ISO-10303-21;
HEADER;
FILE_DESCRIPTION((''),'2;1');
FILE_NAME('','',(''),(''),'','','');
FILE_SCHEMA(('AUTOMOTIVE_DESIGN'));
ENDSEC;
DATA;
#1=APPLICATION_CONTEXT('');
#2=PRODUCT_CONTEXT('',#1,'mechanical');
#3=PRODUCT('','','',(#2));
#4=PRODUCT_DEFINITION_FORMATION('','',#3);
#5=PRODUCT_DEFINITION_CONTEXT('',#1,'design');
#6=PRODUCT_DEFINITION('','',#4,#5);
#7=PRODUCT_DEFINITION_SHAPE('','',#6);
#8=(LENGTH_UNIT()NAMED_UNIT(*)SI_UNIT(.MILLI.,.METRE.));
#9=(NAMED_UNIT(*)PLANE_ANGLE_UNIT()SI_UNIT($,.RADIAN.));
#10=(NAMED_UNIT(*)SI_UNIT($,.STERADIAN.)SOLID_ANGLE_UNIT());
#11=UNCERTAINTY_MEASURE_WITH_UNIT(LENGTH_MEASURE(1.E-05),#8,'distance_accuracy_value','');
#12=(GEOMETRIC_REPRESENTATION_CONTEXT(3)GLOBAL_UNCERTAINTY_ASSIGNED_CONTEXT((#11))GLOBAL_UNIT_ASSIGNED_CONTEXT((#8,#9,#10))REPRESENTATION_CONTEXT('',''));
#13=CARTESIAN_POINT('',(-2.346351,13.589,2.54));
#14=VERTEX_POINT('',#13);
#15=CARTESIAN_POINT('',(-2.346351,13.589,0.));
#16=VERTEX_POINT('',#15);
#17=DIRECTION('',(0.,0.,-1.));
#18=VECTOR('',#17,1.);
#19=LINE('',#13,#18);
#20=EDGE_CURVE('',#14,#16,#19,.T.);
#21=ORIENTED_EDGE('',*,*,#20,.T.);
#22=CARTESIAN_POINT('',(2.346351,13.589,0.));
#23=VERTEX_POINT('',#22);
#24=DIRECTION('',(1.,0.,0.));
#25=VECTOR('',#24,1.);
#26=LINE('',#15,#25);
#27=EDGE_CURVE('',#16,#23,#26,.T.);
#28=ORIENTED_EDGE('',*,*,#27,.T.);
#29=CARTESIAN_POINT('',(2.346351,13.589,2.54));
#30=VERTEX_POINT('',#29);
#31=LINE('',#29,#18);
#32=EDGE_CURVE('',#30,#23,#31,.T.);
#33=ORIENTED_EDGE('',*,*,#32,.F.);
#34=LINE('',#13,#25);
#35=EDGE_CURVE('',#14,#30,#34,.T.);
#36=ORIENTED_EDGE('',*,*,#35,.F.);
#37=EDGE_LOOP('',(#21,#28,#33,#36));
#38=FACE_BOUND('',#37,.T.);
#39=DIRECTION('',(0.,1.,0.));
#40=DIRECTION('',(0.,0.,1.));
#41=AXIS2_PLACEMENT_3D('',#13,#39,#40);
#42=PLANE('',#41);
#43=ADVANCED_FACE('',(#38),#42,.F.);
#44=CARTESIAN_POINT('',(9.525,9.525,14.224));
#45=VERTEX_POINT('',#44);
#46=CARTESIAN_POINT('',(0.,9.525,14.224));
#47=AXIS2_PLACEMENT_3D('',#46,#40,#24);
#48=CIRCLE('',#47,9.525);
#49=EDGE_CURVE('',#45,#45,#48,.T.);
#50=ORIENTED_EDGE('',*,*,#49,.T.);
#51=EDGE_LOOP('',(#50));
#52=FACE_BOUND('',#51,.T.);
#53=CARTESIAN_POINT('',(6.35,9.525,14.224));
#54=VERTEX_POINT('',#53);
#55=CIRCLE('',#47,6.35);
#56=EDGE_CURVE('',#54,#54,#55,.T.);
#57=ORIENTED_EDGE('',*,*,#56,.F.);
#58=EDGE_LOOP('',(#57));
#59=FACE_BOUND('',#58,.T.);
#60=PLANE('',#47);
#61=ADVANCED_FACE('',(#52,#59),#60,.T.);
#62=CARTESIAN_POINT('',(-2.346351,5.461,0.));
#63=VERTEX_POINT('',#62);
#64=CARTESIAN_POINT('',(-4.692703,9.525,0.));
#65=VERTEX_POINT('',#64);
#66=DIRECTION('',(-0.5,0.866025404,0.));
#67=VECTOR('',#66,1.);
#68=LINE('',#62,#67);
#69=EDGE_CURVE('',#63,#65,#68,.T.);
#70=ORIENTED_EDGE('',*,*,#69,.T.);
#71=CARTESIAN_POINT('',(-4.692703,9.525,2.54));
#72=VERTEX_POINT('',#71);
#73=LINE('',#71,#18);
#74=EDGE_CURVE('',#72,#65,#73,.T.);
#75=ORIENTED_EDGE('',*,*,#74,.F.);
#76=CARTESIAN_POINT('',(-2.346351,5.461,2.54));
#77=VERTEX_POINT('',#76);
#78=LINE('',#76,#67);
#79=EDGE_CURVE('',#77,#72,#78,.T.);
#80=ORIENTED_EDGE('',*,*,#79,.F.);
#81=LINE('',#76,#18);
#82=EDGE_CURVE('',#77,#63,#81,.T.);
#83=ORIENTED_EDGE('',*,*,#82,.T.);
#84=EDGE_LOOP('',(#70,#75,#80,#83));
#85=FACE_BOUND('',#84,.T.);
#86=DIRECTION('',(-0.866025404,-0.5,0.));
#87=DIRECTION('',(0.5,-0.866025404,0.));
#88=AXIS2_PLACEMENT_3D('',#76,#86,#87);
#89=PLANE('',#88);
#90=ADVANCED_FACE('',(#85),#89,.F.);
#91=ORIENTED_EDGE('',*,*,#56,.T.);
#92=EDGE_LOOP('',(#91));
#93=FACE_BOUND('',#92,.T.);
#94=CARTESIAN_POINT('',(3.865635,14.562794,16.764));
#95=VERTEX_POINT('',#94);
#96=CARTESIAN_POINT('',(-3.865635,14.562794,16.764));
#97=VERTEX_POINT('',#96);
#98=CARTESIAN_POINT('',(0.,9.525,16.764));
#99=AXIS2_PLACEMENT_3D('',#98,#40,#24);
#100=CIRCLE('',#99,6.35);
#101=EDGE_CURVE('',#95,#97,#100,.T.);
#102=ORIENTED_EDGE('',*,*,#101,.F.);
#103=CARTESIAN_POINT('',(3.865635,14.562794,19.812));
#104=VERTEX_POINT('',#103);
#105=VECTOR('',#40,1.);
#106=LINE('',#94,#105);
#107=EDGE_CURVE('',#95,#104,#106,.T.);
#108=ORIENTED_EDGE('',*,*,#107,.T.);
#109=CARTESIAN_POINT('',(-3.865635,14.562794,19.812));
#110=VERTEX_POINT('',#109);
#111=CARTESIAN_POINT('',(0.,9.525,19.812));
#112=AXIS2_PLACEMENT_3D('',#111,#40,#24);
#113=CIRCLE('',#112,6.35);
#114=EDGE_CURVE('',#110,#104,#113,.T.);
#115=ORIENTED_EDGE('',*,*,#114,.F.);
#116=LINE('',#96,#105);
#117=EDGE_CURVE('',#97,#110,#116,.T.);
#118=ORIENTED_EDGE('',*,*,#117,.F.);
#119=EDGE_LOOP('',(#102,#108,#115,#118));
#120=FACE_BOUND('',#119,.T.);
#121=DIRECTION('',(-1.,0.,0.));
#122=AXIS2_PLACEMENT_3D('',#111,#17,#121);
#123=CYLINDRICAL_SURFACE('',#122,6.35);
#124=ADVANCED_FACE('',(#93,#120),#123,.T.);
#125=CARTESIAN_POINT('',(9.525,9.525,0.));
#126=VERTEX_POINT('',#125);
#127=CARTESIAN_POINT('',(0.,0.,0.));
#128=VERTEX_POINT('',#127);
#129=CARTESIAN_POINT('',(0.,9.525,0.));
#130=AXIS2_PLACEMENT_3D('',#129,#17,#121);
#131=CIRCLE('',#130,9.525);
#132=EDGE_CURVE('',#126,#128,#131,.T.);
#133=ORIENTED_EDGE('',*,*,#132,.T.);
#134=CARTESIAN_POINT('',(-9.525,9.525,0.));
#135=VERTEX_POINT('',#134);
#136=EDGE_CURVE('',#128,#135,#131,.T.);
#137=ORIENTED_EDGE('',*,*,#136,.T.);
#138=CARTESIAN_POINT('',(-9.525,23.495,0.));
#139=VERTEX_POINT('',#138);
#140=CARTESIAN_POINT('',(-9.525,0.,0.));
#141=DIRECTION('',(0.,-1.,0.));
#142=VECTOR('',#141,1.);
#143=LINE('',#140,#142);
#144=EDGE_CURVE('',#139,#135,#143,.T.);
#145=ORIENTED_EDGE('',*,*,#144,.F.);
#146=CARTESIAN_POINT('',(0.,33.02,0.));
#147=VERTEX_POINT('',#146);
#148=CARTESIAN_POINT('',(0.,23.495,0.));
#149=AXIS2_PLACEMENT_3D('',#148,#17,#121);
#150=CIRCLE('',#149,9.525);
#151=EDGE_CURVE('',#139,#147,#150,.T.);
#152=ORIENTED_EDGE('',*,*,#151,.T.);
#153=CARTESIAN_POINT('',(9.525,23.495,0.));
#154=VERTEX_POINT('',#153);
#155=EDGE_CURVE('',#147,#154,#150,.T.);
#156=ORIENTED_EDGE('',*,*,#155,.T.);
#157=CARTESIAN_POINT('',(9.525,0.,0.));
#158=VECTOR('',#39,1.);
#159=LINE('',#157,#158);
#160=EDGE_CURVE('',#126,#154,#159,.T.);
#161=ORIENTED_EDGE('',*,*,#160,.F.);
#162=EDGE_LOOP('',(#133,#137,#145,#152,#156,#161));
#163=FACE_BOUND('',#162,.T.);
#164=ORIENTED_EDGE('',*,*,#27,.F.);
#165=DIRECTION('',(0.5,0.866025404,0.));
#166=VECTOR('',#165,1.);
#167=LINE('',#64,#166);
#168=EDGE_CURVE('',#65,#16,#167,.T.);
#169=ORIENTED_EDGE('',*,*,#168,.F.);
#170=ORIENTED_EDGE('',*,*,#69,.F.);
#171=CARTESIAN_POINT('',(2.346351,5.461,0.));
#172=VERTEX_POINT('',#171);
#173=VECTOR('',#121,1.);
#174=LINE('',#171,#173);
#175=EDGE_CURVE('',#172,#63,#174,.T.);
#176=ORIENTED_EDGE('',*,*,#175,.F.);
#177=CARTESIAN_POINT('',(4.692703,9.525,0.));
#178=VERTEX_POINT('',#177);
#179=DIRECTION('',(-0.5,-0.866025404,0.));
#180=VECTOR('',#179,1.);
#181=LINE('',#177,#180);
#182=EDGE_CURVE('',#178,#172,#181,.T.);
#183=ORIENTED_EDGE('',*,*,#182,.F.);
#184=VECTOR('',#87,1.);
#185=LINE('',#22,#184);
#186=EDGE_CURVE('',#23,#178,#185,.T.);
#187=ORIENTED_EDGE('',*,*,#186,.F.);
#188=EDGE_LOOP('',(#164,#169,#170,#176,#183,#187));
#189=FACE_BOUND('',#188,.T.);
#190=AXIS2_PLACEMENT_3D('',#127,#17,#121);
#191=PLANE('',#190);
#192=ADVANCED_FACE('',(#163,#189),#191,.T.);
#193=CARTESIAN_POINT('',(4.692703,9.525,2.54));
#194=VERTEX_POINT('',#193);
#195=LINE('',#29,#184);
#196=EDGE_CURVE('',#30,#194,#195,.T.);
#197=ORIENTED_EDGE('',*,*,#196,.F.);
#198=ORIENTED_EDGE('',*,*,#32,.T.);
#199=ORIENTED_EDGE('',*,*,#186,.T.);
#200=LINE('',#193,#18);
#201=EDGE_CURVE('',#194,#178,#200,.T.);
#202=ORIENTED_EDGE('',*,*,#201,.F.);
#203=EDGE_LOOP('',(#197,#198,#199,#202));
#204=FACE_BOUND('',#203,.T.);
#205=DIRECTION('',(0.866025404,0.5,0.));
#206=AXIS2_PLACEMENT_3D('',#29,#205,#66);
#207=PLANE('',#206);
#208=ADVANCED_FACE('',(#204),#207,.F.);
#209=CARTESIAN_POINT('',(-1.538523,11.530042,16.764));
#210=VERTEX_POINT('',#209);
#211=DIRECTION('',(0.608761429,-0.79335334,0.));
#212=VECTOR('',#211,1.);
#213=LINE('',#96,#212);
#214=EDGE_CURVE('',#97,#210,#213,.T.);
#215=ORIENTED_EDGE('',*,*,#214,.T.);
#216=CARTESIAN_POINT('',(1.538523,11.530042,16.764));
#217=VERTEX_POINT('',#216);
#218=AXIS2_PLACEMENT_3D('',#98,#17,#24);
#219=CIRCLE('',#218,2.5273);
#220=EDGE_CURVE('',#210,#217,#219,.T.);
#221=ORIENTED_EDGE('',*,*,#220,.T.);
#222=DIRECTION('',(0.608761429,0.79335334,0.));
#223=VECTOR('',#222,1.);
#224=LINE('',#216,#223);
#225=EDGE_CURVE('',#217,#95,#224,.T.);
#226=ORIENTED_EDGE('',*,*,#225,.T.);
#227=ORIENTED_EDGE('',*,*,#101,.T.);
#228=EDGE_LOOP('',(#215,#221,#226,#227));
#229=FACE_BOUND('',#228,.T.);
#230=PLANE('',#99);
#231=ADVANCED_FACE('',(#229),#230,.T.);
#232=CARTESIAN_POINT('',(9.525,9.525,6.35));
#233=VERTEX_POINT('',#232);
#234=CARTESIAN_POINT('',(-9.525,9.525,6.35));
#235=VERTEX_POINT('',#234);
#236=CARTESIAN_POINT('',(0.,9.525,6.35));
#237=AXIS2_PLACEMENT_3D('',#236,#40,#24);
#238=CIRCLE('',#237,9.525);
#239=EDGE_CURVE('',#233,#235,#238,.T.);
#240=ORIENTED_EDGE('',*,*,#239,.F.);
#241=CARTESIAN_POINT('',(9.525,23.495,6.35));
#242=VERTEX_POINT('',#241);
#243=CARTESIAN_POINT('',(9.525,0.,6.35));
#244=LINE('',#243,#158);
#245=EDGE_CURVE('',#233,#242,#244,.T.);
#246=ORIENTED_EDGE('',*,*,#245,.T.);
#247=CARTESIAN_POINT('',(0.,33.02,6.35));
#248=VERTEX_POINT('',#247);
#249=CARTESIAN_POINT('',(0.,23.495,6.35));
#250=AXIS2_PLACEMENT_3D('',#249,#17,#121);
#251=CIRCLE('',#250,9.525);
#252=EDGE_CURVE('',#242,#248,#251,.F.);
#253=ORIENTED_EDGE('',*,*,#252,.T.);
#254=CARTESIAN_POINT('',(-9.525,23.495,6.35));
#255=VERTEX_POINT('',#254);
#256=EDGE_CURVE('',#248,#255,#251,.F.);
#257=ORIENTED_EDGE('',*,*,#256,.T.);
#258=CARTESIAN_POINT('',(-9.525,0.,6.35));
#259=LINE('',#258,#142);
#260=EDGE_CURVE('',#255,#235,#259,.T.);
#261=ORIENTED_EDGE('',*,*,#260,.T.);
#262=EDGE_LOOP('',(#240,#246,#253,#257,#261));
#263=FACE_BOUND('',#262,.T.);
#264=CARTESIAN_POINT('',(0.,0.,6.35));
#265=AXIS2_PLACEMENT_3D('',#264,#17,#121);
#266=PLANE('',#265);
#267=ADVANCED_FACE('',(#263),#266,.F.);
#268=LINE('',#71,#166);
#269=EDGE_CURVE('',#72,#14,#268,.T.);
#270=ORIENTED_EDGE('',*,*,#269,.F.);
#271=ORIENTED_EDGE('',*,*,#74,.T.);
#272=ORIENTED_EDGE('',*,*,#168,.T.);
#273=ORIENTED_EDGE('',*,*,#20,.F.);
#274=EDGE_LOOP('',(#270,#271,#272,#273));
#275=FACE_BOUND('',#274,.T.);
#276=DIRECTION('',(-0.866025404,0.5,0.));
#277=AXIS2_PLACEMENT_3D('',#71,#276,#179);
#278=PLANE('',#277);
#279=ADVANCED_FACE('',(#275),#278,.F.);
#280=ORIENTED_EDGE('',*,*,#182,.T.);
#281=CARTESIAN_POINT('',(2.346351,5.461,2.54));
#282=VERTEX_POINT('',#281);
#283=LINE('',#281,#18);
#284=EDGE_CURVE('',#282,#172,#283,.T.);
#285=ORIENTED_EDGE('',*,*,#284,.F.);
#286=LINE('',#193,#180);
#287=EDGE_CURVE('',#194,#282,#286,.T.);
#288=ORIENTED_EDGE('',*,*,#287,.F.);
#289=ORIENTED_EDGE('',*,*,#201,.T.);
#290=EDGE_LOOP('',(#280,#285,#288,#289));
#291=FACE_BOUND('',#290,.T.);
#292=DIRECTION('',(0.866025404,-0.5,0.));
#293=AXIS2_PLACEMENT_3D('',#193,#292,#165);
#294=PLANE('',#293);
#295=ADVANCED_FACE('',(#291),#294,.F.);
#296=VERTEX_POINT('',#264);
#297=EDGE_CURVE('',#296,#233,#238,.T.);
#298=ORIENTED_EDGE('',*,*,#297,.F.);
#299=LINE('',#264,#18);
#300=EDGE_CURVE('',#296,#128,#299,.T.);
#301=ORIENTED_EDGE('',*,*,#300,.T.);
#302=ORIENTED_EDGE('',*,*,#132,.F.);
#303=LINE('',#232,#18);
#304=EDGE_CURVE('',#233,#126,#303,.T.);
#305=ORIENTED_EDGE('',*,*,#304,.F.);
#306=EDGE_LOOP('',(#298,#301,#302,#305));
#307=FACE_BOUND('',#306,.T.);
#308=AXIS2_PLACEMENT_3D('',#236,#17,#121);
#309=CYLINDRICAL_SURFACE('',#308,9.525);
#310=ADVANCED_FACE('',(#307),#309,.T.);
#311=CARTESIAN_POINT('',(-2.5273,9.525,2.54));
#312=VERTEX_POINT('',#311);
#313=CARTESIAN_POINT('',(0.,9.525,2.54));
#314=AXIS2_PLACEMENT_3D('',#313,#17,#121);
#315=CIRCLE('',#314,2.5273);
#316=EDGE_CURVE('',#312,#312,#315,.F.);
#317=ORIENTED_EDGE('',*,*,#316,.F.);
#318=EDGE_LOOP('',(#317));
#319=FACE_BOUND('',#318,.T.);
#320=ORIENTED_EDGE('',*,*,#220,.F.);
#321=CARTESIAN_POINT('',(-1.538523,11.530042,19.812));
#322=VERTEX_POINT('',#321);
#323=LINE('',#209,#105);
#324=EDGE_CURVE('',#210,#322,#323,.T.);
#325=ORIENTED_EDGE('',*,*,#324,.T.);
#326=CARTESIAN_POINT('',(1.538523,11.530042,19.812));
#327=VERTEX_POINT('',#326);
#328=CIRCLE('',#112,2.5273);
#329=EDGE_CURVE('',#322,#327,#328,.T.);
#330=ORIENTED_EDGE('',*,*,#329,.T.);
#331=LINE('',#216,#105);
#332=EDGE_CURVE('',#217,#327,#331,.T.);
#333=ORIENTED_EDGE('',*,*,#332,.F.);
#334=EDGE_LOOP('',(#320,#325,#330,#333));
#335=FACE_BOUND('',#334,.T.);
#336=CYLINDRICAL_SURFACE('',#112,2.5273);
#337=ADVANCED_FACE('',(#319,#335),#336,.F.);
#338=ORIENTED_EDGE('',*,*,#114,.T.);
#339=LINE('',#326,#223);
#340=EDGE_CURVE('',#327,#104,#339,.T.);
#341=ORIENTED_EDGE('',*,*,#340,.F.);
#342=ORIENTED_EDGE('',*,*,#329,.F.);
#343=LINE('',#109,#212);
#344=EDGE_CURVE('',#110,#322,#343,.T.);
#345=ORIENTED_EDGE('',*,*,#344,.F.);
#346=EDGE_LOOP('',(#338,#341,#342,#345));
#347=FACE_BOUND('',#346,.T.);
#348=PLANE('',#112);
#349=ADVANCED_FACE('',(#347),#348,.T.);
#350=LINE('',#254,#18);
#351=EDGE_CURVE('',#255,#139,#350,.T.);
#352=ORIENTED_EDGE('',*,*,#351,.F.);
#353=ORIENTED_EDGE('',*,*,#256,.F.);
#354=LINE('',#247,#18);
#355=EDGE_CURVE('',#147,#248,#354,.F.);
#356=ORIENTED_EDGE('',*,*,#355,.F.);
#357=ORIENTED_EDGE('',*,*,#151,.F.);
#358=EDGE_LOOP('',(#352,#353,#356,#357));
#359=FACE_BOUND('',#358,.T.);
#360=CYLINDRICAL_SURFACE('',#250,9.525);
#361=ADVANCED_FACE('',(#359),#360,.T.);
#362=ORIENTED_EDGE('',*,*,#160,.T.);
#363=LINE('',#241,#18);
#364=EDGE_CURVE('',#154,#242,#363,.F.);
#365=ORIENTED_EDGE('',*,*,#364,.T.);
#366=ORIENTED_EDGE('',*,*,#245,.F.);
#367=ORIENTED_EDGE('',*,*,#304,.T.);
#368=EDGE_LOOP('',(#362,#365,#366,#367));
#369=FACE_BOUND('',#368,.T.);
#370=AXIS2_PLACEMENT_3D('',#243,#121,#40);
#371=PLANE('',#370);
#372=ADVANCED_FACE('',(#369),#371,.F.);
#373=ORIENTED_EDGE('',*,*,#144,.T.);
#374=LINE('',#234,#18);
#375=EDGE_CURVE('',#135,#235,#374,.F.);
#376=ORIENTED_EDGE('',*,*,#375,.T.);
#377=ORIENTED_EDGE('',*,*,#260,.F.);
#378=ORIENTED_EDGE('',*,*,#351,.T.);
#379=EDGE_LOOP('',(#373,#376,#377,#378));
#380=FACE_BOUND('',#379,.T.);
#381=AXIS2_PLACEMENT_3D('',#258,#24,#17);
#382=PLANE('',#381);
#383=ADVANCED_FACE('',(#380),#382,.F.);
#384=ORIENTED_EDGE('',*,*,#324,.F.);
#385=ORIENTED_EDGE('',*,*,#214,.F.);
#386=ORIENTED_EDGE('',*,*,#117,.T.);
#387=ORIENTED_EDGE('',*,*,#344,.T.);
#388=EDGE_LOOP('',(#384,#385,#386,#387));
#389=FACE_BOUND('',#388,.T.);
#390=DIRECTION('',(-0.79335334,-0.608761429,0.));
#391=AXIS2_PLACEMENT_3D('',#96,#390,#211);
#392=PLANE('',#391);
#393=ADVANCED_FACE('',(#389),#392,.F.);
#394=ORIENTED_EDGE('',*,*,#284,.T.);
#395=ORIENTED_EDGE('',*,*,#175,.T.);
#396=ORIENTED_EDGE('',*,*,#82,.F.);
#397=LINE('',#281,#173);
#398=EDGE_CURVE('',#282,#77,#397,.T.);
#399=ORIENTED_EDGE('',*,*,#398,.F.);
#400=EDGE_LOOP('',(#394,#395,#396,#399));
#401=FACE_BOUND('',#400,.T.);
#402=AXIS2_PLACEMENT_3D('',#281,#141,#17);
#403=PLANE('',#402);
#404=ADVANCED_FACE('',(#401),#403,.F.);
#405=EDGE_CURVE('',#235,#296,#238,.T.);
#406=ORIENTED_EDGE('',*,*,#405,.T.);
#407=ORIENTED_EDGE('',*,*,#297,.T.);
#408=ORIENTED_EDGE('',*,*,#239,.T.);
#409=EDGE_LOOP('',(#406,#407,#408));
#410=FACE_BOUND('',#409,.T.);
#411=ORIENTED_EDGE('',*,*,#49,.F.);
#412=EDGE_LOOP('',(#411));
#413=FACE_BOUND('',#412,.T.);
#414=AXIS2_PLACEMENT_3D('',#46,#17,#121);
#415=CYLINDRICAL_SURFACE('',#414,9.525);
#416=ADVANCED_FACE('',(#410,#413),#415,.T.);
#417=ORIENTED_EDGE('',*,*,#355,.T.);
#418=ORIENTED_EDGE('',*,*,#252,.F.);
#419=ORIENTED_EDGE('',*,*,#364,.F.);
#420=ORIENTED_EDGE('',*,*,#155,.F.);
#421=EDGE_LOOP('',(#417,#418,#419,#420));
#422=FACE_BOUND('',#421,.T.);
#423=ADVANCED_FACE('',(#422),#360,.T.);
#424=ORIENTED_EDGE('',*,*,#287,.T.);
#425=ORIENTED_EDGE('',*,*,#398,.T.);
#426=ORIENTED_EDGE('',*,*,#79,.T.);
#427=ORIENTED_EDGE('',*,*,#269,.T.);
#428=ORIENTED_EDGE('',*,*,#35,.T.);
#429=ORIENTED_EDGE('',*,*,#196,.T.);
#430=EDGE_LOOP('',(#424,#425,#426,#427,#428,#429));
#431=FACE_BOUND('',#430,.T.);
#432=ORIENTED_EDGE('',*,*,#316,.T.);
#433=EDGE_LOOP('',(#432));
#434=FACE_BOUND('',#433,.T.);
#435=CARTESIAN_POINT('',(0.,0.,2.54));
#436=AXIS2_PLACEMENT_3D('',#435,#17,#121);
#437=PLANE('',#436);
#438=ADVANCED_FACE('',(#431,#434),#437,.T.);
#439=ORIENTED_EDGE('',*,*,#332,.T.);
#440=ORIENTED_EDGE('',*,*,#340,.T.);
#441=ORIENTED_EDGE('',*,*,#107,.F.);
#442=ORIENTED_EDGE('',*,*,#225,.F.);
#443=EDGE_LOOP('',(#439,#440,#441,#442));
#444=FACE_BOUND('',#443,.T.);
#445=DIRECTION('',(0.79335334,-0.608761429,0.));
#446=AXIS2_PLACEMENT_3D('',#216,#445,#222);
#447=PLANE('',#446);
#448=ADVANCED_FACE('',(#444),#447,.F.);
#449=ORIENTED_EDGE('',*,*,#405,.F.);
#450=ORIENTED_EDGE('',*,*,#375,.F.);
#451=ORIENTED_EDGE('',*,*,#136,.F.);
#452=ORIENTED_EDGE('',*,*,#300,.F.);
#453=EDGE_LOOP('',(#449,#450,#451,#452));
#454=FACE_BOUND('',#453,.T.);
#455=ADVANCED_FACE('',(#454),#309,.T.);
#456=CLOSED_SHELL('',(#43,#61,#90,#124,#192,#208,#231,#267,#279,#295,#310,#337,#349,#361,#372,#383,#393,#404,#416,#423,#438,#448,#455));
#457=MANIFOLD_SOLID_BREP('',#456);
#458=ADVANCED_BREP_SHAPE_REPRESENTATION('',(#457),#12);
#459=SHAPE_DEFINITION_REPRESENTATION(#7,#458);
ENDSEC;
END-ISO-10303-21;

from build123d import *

# Parameters (mm, degrees)
SKETCH1_W                  = 19.05
SKETCH1_H                  = 33.02
BOSS_EXTRUDE1_DEPTH        = 6.35
SKETCH2_R                  = 6.35
BOSS_EXTRUDE2_DEPTH        = 13.462
F_8_0_199_DIAMETER_HOLE1_D = 5.0546
CUT_EXTRUDE1_DEPTH         = 2.54
SKETCH7_R                  = 9.525
SKETCH7_R_2                = 6.35
BOSS_EXTRUDE3_DEPTH        = 7.874
CUT_EXTRUDE2_START         = -3.048
CUT_EXTRUDE2_DEPTH         = 3.048
FILLET1_R                  = 9.525


with BuildPart() as part:
    # Sketch1 → Boss-Extrude1 (new body)
    with BuildSketch(Plane.XY):
        with Locations((0, 16.51)):
            Rectangle(SKETCH1_W, SKETCH1_H)
    extrude(amount=BOSS_EXTRUDE1_DEPTH)

    # Sketch2 → Boss-Extrude2 (add)
    with BuildSketch(Plane.XY.offset(6.35)):
        with Locations(Location((0, 9.525, 0), (0, 0, 180))):
            Circle(SKETCH2_R)
    extrude(amount=BOSS_EXTRUDE2_DEPTH)

    # #8 (0.199) Diameter Hole1 (through all)
    with Locations(Plane.XY.offset(19.812)):
        with Locations((0, 9.525)):
            Hole(F_8_0_199_DIAMETER_HOLE1_D / 2)

    # Sketch5 → Cut-Extrude1 (cut)
    with BuildSketch(Plane(origin=(0, 0, 0), x_dir=(-1, 0, 0), z_dir=(0, 0, -1))):
        Polygon((2.346351494, 5.461), (4.692702988, 9.525), (2.346351494, 13.589), (-2.346351494, 13.589), (-4.692702988, 9.525), (-2.346351494, 5.461), align=None)
    extrude(amount=-CUT_EXTRUDE1_DEPTH, mode=Mode.SUBTRACT)

    # Sketch7 → Boss-Extrude3 (add)
    with BuildSketch(Plane.XY.offset(6.35)):
        with Locations((0, 9.525)):
            Circle(SKETCH7_R)
        with Locations((0, 9.525)):
            Circle(SKETCH7_R_2, mode=Mode.SUBTRACT)
    extrude(amount=BOSS_EXTRUDE3_DEPTH)

    # Sketch8 → Cut-Extrude2 (cut)
    with BuildSketch(Plane.XY.offset(19.812).offset(CUT_EXTRUDE2_START)):
        with BuildLine():
            Line((1.53852276, 11.530041897), (3.865635074, 14.562793711))
            ThreePointArc((3.865635074, 14.562793711), (0, 15.875), (-3.865635074, 14.562793711))
            Line((-3.865635074, 14.562793711), (-1.53852276, 11.530041897))
            ThreePointArc((-1.53852276, 11.530041897), (0, 12.0523), (1.53852276, 11.530041897))
        make_face()
    extrude(amount=CUT_EXTRUDE2_DEPTH, mode=Mode.SUBTRACT)

    # Fillet1
    fillet1_edges = [part.edges().sort_by_distance(p)[0] for p in [
        (9.525, 0, 3.175),
        (-9.525, 0, 3.175),
        (9.525, 33.02, 3.175),
        (-9.525, 33.02, 3.175),
    ]]
    fillet(fillet1_edges, radius=FILLET1_R - 0.0001)  # a hair under: the kernel refuses the full size


solid = part.part
